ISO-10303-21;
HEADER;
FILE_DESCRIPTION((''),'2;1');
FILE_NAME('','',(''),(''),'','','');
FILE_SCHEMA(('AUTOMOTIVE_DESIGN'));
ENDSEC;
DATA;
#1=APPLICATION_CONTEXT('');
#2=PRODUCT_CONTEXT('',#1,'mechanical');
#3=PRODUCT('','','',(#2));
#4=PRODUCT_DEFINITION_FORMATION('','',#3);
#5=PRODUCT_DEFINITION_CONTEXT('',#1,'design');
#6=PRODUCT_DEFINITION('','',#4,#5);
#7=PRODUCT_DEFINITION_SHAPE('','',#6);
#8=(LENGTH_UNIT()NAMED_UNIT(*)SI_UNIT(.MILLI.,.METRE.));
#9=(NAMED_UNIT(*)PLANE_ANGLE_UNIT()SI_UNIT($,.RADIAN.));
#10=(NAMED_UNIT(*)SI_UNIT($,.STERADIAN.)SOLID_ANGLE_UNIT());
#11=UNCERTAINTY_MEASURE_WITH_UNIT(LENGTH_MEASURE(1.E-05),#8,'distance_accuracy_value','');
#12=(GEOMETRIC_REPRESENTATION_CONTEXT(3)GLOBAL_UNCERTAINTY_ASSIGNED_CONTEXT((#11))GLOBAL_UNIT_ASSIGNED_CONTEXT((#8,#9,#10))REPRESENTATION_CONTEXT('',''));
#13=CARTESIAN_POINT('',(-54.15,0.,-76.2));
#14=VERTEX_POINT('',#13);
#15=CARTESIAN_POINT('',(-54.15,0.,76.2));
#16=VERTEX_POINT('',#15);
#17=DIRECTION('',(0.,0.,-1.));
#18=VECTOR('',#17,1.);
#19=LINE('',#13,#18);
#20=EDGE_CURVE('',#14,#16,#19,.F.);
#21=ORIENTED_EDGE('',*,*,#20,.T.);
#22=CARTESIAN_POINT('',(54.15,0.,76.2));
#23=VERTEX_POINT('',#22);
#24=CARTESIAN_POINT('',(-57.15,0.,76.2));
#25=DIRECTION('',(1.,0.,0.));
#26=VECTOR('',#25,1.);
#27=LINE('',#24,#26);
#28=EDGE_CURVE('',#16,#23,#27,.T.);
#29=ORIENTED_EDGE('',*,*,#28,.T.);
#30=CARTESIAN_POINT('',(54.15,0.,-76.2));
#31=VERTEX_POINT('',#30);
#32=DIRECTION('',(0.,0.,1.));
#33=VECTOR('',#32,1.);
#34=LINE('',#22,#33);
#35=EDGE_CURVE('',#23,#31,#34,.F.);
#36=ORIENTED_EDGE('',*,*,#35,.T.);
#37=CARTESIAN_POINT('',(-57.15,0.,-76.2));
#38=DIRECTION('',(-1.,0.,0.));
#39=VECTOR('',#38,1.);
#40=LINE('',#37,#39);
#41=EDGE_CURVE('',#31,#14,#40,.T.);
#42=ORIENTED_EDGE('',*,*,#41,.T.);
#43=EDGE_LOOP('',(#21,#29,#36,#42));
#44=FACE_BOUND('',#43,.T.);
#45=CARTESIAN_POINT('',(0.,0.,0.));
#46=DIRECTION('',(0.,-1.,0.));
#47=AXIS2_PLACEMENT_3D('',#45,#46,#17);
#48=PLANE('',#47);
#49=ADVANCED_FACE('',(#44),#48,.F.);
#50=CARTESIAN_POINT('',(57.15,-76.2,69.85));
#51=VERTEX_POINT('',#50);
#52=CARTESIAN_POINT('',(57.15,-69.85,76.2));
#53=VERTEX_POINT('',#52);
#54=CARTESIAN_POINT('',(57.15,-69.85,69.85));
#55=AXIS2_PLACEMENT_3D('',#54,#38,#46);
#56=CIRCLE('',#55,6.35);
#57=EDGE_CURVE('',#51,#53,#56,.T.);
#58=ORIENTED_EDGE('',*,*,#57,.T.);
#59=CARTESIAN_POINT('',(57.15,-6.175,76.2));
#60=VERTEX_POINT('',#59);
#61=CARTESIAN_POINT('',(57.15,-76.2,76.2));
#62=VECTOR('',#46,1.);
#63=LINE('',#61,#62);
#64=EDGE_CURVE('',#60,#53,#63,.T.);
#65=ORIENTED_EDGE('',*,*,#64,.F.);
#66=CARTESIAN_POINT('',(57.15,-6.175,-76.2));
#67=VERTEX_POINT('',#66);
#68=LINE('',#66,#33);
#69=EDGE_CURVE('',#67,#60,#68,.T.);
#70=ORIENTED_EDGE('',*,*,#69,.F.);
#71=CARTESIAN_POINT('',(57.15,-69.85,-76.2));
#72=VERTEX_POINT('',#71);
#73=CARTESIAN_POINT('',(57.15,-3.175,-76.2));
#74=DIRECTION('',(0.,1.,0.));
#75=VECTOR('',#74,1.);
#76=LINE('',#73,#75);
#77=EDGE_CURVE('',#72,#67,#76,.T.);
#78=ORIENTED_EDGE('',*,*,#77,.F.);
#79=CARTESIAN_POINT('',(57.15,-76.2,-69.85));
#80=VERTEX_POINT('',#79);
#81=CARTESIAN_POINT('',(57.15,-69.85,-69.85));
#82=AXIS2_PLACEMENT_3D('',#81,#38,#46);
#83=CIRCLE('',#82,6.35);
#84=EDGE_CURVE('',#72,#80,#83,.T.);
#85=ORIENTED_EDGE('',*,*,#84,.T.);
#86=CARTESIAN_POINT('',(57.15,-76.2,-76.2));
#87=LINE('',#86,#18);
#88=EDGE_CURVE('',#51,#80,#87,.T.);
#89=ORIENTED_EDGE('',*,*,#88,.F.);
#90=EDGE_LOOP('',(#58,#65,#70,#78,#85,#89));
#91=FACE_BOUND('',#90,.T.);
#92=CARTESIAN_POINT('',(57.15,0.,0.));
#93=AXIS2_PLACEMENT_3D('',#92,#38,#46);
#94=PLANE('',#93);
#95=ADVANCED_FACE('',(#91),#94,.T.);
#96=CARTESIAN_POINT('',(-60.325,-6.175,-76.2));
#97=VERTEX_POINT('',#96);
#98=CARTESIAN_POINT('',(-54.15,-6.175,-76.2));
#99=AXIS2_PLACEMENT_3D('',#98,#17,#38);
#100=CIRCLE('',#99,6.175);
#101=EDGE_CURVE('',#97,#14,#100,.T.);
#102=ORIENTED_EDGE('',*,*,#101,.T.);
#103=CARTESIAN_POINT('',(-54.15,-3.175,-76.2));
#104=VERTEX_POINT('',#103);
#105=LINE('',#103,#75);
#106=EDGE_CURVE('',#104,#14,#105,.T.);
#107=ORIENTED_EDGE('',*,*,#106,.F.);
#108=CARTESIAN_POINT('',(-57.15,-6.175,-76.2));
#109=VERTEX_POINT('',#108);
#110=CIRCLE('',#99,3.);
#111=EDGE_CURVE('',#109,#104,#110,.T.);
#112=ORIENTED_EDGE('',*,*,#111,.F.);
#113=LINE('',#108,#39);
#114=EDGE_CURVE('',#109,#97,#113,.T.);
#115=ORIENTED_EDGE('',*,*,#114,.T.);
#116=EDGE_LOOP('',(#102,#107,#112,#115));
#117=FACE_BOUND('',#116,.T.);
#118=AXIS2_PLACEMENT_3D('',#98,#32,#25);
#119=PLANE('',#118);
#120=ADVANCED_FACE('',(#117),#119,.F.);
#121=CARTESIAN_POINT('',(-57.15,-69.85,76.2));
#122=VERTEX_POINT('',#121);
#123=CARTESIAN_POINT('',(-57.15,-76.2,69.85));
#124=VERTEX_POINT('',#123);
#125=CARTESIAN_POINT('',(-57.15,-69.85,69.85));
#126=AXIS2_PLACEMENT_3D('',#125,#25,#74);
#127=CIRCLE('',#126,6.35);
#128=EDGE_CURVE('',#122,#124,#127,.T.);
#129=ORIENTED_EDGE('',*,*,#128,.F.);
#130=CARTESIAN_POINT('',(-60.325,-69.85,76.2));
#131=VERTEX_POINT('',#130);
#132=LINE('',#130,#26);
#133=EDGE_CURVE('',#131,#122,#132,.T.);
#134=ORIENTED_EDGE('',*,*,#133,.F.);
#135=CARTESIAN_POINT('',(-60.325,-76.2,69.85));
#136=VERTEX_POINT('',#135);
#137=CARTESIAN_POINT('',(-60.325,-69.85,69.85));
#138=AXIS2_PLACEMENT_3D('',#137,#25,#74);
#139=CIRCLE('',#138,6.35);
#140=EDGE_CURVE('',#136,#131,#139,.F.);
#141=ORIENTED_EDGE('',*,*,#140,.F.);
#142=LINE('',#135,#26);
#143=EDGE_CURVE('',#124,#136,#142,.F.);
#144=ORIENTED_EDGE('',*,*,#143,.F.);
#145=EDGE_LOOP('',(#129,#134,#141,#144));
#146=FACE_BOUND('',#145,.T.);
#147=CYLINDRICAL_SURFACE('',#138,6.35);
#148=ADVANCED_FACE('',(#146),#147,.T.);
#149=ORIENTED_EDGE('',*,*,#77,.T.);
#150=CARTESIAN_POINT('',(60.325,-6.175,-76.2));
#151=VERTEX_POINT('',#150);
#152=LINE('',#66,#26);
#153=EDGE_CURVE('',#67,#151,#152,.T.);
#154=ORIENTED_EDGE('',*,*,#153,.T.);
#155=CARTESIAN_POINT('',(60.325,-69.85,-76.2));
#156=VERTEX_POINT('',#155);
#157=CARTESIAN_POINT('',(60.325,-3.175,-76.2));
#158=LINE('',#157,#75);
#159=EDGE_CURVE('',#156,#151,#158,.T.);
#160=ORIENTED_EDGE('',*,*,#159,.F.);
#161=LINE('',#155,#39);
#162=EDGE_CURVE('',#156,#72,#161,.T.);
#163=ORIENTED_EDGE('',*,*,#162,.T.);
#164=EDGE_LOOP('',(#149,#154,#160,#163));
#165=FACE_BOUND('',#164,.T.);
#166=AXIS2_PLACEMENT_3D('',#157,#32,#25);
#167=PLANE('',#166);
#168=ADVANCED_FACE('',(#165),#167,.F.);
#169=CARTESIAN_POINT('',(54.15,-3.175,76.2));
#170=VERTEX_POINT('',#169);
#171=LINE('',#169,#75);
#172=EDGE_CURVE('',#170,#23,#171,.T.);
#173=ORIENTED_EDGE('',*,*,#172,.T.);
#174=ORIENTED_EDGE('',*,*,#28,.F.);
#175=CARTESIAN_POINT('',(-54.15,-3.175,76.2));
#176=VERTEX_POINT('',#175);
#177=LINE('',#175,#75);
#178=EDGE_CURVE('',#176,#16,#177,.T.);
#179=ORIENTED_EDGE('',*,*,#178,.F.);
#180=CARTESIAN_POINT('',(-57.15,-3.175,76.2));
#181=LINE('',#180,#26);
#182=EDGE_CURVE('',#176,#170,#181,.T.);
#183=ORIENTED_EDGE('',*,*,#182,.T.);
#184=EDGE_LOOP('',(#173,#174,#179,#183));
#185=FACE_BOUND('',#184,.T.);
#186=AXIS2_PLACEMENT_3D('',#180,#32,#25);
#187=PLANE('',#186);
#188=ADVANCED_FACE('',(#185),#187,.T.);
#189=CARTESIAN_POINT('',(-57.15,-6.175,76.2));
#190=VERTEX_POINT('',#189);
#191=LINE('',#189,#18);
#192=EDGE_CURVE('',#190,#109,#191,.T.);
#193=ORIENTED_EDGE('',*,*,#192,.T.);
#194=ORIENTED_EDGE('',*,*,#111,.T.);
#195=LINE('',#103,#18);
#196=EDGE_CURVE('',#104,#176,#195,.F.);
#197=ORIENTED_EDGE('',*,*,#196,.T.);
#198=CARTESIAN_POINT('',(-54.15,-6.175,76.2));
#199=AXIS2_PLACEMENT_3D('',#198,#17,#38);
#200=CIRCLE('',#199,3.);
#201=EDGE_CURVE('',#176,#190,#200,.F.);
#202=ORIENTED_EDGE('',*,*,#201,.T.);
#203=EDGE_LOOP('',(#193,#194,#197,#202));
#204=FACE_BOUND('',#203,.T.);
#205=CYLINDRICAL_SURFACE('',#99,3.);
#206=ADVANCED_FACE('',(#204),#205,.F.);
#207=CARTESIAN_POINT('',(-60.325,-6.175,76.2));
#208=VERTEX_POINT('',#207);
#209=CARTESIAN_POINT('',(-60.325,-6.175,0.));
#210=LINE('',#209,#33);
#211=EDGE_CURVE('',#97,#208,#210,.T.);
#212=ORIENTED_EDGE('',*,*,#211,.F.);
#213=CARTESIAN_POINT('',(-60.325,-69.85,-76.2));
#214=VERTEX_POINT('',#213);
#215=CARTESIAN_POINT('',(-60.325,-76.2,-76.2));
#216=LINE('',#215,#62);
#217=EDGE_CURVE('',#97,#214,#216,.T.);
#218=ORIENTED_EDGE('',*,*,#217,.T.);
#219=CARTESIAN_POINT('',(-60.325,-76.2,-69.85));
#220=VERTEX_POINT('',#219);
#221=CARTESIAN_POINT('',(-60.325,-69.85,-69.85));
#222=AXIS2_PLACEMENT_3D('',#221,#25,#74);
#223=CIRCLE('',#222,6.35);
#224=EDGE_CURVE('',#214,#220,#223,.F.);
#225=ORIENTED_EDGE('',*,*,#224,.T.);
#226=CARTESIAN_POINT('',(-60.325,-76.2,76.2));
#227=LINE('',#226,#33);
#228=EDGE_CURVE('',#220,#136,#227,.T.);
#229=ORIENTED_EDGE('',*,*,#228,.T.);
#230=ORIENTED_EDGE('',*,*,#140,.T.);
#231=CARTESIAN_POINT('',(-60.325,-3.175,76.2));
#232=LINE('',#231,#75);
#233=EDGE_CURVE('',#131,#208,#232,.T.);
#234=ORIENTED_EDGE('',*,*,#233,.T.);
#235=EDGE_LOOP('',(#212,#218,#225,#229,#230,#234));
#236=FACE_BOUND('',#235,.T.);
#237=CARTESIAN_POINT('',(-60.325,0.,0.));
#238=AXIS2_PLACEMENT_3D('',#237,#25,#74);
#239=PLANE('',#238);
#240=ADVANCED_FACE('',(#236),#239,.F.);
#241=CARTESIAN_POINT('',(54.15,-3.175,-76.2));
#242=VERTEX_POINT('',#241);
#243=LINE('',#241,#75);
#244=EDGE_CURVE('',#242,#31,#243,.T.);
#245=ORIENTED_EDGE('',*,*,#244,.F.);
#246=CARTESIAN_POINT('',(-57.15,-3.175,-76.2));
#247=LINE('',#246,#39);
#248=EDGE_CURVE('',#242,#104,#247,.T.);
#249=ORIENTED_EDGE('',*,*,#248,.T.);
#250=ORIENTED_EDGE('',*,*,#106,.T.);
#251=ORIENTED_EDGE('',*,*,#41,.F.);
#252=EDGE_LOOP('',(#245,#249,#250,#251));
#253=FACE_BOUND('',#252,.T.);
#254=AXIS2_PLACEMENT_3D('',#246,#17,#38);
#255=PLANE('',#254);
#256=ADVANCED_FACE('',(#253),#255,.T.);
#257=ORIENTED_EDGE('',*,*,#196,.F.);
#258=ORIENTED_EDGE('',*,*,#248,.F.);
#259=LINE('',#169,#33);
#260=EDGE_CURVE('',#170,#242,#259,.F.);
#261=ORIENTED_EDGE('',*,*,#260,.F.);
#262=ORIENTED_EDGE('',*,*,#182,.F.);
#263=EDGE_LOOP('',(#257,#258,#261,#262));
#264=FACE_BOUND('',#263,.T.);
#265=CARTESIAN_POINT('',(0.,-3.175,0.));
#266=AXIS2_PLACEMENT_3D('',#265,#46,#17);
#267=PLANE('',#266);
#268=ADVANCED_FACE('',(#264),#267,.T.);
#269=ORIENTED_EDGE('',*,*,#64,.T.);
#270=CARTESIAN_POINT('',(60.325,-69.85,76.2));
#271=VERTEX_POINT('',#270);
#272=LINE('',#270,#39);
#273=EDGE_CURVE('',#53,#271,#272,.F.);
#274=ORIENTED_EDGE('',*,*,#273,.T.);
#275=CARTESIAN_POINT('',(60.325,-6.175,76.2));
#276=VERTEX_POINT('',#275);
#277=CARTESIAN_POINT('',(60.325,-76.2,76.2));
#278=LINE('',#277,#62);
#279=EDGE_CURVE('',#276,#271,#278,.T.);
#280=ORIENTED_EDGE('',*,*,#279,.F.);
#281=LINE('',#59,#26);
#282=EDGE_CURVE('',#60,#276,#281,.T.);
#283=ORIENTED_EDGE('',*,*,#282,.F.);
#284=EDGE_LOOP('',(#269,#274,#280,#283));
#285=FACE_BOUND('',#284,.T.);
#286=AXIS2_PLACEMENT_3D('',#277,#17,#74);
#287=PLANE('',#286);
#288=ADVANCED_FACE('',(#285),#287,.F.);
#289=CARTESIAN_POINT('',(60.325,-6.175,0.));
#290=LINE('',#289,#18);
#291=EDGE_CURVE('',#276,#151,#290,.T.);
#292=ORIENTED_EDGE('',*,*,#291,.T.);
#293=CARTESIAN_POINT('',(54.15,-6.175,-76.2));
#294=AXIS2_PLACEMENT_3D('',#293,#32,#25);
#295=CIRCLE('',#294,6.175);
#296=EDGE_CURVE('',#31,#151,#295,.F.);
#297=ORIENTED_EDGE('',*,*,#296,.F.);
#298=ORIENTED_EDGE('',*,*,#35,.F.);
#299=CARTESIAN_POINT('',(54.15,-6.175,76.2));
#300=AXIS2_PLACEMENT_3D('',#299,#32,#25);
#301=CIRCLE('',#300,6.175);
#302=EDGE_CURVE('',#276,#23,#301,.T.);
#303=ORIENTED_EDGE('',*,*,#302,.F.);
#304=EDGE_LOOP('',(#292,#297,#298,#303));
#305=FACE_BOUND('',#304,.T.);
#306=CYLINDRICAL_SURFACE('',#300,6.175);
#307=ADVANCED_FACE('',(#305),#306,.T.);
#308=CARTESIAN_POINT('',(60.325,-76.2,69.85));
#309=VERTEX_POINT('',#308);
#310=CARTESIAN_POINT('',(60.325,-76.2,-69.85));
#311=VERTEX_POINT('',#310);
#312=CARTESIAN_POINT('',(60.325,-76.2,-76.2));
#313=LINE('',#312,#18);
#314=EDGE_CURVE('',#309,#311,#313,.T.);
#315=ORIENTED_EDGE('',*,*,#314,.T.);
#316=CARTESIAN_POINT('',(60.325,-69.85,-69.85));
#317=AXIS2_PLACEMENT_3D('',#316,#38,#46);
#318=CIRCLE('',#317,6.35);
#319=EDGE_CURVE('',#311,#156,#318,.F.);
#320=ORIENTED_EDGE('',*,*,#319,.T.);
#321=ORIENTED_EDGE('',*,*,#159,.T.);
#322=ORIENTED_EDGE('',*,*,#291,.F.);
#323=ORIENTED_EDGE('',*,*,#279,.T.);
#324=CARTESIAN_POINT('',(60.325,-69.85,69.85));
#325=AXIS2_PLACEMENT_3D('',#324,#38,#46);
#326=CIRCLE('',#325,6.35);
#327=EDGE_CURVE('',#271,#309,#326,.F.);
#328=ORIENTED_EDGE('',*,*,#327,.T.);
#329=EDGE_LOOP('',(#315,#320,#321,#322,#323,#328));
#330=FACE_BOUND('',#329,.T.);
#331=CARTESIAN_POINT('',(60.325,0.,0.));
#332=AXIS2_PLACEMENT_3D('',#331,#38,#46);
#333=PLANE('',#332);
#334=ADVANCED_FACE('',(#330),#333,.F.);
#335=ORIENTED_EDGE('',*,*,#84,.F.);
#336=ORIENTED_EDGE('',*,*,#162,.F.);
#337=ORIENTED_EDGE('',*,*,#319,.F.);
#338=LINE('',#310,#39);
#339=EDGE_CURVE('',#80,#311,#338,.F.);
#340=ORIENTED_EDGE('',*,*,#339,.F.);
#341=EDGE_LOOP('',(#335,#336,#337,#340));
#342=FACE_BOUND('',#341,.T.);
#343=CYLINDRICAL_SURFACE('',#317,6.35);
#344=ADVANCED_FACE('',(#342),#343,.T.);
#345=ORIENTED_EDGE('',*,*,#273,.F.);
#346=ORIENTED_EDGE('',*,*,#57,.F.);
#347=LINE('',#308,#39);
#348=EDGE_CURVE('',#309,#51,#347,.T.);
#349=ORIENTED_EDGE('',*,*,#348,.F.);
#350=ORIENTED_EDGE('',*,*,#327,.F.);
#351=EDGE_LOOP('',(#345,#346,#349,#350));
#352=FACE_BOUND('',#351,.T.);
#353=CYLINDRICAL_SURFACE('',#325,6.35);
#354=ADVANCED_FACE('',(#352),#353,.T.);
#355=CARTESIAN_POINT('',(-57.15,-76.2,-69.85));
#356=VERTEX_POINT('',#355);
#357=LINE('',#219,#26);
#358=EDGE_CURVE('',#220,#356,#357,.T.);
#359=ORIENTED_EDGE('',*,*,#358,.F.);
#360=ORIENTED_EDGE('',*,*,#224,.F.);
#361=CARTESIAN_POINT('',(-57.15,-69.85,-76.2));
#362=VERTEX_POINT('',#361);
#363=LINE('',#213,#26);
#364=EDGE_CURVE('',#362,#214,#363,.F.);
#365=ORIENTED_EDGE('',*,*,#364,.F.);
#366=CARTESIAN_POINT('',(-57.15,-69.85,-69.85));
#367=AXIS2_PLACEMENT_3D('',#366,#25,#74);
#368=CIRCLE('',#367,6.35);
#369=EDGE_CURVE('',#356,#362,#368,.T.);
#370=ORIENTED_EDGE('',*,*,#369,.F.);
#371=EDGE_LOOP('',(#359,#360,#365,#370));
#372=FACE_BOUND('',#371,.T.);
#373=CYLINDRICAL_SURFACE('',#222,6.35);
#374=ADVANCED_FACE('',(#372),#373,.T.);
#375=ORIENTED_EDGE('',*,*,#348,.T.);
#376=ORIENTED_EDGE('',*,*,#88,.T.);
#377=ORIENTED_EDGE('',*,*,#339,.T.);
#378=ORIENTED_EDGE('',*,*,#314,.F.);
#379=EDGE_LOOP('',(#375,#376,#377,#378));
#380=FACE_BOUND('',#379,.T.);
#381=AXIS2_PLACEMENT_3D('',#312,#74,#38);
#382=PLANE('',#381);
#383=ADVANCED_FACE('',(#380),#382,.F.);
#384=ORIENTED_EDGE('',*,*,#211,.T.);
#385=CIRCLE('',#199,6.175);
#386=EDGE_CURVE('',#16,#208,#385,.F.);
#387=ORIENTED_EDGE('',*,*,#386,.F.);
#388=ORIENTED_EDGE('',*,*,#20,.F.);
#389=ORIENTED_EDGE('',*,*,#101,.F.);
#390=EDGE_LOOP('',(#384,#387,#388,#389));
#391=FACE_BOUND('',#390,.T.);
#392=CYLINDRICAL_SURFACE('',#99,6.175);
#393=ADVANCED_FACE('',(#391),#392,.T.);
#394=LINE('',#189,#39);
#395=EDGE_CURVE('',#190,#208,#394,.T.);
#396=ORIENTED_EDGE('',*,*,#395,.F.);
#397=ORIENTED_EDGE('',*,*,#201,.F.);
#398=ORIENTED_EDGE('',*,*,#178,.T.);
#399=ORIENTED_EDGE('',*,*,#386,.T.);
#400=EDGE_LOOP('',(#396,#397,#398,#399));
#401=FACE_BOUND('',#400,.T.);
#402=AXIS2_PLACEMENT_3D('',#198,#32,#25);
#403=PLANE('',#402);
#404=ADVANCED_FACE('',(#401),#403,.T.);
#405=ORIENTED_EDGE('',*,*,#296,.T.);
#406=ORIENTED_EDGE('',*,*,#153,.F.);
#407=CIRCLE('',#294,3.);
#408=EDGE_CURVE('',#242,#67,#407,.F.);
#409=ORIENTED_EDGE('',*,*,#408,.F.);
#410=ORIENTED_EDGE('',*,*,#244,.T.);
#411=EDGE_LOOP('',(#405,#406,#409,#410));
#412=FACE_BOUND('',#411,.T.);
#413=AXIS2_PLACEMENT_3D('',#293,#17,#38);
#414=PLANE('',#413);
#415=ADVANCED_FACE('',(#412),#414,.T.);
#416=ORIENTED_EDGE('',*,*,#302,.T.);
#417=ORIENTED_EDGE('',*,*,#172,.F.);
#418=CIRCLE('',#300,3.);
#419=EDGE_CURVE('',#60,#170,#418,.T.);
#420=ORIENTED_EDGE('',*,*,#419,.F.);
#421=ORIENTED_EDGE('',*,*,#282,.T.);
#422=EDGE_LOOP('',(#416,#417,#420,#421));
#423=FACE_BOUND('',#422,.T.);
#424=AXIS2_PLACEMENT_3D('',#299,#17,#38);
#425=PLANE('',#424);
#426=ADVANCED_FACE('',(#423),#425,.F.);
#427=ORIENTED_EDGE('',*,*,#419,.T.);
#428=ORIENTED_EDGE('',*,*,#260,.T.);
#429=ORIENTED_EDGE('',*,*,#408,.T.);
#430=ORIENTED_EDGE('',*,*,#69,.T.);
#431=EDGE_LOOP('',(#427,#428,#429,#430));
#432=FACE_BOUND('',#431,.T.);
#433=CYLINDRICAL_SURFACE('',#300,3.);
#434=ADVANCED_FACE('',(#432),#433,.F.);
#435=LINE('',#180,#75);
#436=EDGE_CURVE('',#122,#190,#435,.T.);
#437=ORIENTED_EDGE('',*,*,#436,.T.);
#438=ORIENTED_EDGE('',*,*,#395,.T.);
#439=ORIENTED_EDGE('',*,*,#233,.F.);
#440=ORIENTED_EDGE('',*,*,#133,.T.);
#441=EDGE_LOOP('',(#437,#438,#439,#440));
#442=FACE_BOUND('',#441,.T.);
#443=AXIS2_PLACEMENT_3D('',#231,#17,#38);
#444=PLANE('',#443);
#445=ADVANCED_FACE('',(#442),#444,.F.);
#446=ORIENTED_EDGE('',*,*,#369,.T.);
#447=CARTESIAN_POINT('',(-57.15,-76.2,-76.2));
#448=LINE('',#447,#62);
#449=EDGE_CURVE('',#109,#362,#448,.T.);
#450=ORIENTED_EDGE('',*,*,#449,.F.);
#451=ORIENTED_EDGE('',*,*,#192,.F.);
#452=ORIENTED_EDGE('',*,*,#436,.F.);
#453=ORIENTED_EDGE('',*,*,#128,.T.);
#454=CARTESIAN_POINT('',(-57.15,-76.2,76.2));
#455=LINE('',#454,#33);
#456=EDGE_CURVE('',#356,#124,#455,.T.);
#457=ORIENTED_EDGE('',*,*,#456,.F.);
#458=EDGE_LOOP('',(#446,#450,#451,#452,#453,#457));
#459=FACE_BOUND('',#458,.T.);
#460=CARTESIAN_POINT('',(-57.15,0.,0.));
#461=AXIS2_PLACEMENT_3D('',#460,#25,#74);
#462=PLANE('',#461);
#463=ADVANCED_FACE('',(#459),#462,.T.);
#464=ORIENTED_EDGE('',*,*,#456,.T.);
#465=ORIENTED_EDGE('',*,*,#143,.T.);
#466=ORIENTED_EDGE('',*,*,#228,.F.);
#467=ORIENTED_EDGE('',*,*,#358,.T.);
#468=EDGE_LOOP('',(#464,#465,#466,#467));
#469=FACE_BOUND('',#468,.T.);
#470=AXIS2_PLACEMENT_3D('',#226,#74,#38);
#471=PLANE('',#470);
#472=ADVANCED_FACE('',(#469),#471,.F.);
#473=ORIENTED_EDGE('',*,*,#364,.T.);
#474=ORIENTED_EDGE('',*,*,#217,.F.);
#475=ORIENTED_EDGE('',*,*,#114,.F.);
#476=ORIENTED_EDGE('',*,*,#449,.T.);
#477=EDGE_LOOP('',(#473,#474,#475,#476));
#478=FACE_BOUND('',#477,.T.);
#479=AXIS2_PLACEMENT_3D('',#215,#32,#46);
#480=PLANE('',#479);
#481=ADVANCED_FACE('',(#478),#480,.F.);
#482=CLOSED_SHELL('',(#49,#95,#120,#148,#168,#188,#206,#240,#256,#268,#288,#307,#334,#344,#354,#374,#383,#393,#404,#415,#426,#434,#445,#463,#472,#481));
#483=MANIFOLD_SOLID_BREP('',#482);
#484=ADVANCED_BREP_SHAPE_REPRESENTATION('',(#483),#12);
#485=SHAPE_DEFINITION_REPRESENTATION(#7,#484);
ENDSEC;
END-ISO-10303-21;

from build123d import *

# Parameters (mm, degrees)
SKETCH1_W                      = 114.3
SKETCH1_H                      = 152.4
BASE_FLANGE1_DEPTH             = 3.175
EDGE_FLANGE1_STRIP_W           = 18.700000192
EDGE_FLANGE1_STRIP_H           = 3.175
EDGE_FLANGE1_STRIP_CUT_DEPTH   = 152.4
EDGE_FLANGE1_STRIP_2_W         = 18.700000192
EDGE_FLANGE1_STRIP_2_H         = 3.175
EDGE_FLANGE1_STRIP_CUT_2_DEPTH = 152.4
EDGE_FLANGE1_DEPTH             = 152.4
EDGE_FLANGE1_BEND_DEPTH        = 152.4
FILLET1_R                      = 6.35


# Sheet-metal steps are written as plain solids
with BuildPart() as part:
    # Sketch1 → Base-Flange1 (new body)
    with BuildSketch(Plane(origin=(0, 0, 0), x_dir=(1, 0, 0), z_dir=(0, 1, 0))):
        Rectangle(SKETCH1_W, SKETCH1_H)
    extrude(amount=-BASE_FLANGE1_DEPTH)

    # Edge-Flange1 strip (across the edge) → Edge-Flange1 strip cut (cut)
    with BuildSketch(Plane(origin=(57.15, -3.175, -76.2), x_dir=(-1, 0, 0), z_dir=(0, 0, 1))):
        with Locations((-6.35, -1.5875)):
            Rectangle(EDGE_FLANGE1_STRIP_W, EDGE_FLANGE1_STRIP_H)
    extrude(amount=EDGE_FLANGE1_STRIP_CUT_DEPTH, mode=Mode.SUBTRACT)

    # Edge-Flange1 strip 2 (across the edge) → Edge-Flange1 strip cut 2 (cut)
    with BuildSketch(Plane(origin=(-57.15, -3.175, 76.2), x_dir=(1, 0, 0), z_dir=(0, 0, -1))):
        with Locations((-6.35, -1.5875)):
            Rectangle(EDGE_FLANGE1_STRIP_2_W, EDGE_FLANGE1_STRIP_2_H)
    extrude(amount=EDGE_FLANGE1_STRIP_CUT_2_DEPTH, mode=Mode.SUBTRACT)

    # Edge-Flange1 section (across the edge) → Edge-Flange1 (add)
    with BuildSketch(Plane(origin=(57.15, -3.175, -76.2), x_dir=(-1, 0, 0), z_dir=(0, 0, 1))):
        with BuildLine():
            Line((-3.175, 3.000000096), (-3.175, 73.025))
            Line((-3.175, 73.025), (0, 73.025))
            Line((0, 73.025), (0, 3.000000096))
            ThreePointArc((0, 3.000000096), (0.878679685, 0.878679685), (3.000000096, 0))
            Line((3.000000096, 0), (3.000000096, -3.175))
            ThreePointArc((3.000000096, -3.175), (-1.366384346, -1.366384346), (-3.175, 3.000000096))
        make_face()
    extrude(amount=EDGE_FLANGE1_DEPTH)

    # Edge-Flange1 section 2 (across the edge) → Edge-Flange1 bend (add)
    with BuildSketch(Plane(origin=(-57.15, -3.175, 76.2), x_dir=(1, 0, 0), z_dir=(0, 0, -1))):
        with BuildLine():
            Line((-3.175, 3.000000096), (-3.175, 73.025))
            Line((-3.175, 73.025), (0, 73.025))
            Line((0, 73.025), (0, 3.000000096))
            ThreePointArc((0, 3.000000096), (0.878679685, 0.878679685), (3.000000096, 0))
            Line((3.000000096, 0), (3.000000096, -3.175))
            ThreePointArc((3.000000096, -3.175), (-1.366384346, -1.366384346), (-3.175, 3.000000096))
        make_face()
    extrude(amount=EDGE_FLANGE1_BEND_DEPTH)

    # Fillet1
    fillet1_edges = [part.edges().sort_by_distance(p)[0] for p in [
        (58.7375, -76.2, -76.2),
        (58.7375, -76.2, 76.2),
        (-58.7375, -76.2, 76.2),
        (-58.7375, -76.2, -76.2),
    ]]
    fillet(fillet1_edges, radius=FILLET1_R)


solid = part.part
